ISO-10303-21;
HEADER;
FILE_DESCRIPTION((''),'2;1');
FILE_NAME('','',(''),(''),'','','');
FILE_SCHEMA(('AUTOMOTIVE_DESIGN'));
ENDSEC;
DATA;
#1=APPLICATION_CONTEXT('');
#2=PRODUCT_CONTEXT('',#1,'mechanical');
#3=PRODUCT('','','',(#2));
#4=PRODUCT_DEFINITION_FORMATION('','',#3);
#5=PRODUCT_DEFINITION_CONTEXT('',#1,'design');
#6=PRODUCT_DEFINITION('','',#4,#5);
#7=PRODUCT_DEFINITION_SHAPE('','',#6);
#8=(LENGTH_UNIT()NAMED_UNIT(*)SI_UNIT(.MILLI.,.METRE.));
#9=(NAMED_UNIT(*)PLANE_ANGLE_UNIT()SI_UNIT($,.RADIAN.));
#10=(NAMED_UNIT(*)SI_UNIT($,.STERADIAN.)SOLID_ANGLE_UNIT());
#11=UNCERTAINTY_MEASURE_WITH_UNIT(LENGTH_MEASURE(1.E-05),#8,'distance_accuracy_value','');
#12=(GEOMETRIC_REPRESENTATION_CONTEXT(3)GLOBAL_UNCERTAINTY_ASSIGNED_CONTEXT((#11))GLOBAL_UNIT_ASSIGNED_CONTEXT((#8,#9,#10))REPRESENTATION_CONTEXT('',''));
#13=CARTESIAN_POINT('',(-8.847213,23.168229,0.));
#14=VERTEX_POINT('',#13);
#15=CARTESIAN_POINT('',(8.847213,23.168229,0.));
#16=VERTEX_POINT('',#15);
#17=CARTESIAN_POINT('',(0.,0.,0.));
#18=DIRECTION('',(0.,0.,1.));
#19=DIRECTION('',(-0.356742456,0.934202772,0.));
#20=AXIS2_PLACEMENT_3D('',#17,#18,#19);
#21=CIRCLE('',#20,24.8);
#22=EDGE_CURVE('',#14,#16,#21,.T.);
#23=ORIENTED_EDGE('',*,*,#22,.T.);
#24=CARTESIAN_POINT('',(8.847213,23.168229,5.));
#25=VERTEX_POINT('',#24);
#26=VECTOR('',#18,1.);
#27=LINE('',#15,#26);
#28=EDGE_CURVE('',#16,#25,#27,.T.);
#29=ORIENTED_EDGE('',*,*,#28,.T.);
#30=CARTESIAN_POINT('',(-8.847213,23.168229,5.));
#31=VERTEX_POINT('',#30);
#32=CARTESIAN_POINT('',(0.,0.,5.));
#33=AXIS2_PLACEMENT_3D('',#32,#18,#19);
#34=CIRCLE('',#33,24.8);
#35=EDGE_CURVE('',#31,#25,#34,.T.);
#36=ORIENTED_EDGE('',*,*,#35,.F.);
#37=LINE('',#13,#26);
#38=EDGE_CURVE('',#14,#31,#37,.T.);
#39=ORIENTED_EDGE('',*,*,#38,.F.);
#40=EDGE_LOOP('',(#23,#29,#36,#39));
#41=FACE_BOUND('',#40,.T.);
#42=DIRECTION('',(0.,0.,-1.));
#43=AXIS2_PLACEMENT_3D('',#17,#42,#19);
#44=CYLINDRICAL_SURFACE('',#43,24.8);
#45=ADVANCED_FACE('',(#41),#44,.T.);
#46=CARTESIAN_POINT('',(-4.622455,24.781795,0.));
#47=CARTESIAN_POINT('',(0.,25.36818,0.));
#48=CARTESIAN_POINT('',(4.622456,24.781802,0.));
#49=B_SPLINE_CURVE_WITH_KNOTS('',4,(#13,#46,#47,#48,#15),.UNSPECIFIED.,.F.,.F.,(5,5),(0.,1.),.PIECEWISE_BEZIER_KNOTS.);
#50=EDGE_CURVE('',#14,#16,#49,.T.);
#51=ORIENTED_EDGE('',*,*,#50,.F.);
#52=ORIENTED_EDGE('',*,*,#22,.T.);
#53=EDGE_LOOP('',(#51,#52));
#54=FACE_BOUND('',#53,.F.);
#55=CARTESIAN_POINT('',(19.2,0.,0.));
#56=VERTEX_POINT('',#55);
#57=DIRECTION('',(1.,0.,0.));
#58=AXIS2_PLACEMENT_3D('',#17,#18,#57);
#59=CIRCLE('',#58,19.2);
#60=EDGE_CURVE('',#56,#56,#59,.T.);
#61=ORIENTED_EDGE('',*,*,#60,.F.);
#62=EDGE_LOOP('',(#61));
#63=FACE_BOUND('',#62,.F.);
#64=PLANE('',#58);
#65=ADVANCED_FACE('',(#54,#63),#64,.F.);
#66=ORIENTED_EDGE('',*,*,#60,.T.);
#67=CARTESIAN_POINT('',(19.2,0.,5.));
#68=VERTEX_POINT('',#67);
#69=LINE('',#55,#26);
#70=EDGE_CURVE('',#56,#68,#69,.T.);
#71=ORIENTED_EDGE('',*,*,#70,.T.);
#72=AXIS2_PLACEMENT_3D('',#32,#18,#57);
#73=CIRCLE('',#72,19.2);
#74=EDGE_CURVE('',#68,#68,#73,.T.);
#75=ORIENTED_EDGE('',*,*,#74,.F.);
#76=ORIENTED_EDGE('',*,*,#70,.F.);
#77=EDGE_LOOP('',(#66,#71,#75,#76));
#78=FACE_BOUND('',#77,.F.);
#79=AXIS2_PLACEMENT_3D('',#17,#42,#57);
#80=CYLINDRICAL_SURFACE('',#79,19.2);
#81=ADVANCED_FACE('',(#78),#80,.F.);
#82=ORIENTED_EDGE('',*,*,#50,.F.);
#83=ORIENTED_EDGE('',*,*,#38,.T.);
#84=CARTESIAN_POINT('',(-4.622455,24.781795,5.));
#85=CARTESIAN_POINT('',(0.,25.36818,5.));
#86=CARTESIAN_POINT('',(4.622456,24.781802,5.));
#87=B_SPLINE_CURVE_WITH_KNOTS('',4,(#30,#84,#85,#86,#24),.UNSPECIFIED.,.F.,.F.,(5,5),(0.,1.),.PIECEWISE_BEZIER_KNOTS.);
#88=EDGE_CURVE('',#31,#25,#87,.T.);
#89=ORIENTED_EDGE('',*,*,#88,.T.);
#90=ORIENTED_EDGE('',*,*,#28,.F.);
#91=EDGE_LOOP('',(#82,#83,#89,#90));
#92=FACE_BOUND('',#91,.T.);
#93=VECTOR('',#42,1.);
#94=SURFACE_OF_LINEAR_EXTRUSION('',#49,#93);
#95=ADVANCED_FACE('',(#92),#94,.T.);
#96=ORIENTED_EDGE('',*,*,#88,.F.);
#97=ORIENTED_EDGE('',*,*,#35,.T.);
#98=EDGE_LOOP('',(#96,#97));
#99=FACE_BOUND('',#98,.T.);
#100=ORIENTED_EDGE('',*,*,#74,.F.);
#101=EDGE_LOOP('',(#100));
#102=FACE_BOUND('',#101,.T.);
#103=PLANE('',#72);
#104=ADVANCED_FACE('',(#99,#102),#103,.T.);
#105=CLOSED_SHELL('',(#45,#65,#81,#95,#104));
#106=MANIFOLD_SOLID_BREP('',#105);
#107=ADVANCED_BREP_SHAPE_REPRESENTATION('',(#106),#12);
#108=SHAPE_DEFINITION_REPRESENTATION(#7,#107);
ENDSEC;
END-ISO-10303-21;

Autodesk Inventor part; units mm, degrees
ref_plane "YZ Plane" through (0, 0, 0) normal (1, 0, 0) x (0, 1, 0)
ref_plane "Work Plane1" through (0, 0, 0) normal (0, 0, 1) x (1, 0, 0)
sketch "Sketch1" plane through (0, 0, 0) normal (0, 0, 1) x (1, 0, 0)
  circle A0 centre (0, 0) radius 19
  circle A1 centre (0, 0) radius 13.5
  circle A2 centre (0, 0) radius 19.2
  arc A3 (-8.918561, 23.355069) -> (8.918561, 23.355069) centre (0, 0) ccw
  arc A4 (-8.847213, 23.168229) -> (8.847213, 23.168229) centre (0, 0) ccw
  spline S0 degree 3 poles (-8.918561, 23.355069) (-5.800733, 24.545669) (-2.472604, 25.101169) (3.624662, 24.889005) (6.34449, 24.338026) (8.918561, 23.355069) knots 25.34476066 25.34476066 25.34476066 25.34476066 26.34598695 26.34598695 27.17143876 27.17143876 27.17143876 27.17143876
  arc A5 (-8.847213, 23.168229) -> (8.847213, 23.168229) centre (0, 0) ccw
  spline S1 degree 4 poles (-8.847213, 23.168229) (-4.622455, 24.781795) (0, 25.36818) (4.622456, 24.781802) (8.847213, 23.168229) knots 0 0 0 0 0 1 1 1 1 1
  point P0 (0, 0)
  point P1 (8.847213, 23.168229)
  dimension "d5" = 0.2
  dimension "d1" = 0.2
  dimension "d4" = 0.2
ref_plane "Work Plane2" through (-19, -19, 5) normal (0, 0, 1) x (1, 0, 0)
ref_plane "Work Plane3" through (-19, -19, 5) normal (0, 0, 1) x (1, 0, 0)
sketch "Sketch1 outline for Extrusion2" plane through (0, 0, 0) normal (0, 0, 1) x (1, 0, 0)
  spline S0 degree 4 poles (-8.847213, 23.168229) (-4.622455, 24.781795) (0, 25.36818) (4.622456, 24.781802) (8.847213, 23.168229) knots 0 0 0 0 0 1 1 1 1 1
  arc A0 (-8.847213, 23.168229) -> (8.847213, 23.168229) centre (0, 0) ccw
  circle A1 centre (0, 0) radius 19.2
extrude "Extrusion2" add sketch "Sketch1 outline for Extrusion2" along normal up to surface (5 mm away)
properties part number "bearing-spacer-middle_3DPrint"
